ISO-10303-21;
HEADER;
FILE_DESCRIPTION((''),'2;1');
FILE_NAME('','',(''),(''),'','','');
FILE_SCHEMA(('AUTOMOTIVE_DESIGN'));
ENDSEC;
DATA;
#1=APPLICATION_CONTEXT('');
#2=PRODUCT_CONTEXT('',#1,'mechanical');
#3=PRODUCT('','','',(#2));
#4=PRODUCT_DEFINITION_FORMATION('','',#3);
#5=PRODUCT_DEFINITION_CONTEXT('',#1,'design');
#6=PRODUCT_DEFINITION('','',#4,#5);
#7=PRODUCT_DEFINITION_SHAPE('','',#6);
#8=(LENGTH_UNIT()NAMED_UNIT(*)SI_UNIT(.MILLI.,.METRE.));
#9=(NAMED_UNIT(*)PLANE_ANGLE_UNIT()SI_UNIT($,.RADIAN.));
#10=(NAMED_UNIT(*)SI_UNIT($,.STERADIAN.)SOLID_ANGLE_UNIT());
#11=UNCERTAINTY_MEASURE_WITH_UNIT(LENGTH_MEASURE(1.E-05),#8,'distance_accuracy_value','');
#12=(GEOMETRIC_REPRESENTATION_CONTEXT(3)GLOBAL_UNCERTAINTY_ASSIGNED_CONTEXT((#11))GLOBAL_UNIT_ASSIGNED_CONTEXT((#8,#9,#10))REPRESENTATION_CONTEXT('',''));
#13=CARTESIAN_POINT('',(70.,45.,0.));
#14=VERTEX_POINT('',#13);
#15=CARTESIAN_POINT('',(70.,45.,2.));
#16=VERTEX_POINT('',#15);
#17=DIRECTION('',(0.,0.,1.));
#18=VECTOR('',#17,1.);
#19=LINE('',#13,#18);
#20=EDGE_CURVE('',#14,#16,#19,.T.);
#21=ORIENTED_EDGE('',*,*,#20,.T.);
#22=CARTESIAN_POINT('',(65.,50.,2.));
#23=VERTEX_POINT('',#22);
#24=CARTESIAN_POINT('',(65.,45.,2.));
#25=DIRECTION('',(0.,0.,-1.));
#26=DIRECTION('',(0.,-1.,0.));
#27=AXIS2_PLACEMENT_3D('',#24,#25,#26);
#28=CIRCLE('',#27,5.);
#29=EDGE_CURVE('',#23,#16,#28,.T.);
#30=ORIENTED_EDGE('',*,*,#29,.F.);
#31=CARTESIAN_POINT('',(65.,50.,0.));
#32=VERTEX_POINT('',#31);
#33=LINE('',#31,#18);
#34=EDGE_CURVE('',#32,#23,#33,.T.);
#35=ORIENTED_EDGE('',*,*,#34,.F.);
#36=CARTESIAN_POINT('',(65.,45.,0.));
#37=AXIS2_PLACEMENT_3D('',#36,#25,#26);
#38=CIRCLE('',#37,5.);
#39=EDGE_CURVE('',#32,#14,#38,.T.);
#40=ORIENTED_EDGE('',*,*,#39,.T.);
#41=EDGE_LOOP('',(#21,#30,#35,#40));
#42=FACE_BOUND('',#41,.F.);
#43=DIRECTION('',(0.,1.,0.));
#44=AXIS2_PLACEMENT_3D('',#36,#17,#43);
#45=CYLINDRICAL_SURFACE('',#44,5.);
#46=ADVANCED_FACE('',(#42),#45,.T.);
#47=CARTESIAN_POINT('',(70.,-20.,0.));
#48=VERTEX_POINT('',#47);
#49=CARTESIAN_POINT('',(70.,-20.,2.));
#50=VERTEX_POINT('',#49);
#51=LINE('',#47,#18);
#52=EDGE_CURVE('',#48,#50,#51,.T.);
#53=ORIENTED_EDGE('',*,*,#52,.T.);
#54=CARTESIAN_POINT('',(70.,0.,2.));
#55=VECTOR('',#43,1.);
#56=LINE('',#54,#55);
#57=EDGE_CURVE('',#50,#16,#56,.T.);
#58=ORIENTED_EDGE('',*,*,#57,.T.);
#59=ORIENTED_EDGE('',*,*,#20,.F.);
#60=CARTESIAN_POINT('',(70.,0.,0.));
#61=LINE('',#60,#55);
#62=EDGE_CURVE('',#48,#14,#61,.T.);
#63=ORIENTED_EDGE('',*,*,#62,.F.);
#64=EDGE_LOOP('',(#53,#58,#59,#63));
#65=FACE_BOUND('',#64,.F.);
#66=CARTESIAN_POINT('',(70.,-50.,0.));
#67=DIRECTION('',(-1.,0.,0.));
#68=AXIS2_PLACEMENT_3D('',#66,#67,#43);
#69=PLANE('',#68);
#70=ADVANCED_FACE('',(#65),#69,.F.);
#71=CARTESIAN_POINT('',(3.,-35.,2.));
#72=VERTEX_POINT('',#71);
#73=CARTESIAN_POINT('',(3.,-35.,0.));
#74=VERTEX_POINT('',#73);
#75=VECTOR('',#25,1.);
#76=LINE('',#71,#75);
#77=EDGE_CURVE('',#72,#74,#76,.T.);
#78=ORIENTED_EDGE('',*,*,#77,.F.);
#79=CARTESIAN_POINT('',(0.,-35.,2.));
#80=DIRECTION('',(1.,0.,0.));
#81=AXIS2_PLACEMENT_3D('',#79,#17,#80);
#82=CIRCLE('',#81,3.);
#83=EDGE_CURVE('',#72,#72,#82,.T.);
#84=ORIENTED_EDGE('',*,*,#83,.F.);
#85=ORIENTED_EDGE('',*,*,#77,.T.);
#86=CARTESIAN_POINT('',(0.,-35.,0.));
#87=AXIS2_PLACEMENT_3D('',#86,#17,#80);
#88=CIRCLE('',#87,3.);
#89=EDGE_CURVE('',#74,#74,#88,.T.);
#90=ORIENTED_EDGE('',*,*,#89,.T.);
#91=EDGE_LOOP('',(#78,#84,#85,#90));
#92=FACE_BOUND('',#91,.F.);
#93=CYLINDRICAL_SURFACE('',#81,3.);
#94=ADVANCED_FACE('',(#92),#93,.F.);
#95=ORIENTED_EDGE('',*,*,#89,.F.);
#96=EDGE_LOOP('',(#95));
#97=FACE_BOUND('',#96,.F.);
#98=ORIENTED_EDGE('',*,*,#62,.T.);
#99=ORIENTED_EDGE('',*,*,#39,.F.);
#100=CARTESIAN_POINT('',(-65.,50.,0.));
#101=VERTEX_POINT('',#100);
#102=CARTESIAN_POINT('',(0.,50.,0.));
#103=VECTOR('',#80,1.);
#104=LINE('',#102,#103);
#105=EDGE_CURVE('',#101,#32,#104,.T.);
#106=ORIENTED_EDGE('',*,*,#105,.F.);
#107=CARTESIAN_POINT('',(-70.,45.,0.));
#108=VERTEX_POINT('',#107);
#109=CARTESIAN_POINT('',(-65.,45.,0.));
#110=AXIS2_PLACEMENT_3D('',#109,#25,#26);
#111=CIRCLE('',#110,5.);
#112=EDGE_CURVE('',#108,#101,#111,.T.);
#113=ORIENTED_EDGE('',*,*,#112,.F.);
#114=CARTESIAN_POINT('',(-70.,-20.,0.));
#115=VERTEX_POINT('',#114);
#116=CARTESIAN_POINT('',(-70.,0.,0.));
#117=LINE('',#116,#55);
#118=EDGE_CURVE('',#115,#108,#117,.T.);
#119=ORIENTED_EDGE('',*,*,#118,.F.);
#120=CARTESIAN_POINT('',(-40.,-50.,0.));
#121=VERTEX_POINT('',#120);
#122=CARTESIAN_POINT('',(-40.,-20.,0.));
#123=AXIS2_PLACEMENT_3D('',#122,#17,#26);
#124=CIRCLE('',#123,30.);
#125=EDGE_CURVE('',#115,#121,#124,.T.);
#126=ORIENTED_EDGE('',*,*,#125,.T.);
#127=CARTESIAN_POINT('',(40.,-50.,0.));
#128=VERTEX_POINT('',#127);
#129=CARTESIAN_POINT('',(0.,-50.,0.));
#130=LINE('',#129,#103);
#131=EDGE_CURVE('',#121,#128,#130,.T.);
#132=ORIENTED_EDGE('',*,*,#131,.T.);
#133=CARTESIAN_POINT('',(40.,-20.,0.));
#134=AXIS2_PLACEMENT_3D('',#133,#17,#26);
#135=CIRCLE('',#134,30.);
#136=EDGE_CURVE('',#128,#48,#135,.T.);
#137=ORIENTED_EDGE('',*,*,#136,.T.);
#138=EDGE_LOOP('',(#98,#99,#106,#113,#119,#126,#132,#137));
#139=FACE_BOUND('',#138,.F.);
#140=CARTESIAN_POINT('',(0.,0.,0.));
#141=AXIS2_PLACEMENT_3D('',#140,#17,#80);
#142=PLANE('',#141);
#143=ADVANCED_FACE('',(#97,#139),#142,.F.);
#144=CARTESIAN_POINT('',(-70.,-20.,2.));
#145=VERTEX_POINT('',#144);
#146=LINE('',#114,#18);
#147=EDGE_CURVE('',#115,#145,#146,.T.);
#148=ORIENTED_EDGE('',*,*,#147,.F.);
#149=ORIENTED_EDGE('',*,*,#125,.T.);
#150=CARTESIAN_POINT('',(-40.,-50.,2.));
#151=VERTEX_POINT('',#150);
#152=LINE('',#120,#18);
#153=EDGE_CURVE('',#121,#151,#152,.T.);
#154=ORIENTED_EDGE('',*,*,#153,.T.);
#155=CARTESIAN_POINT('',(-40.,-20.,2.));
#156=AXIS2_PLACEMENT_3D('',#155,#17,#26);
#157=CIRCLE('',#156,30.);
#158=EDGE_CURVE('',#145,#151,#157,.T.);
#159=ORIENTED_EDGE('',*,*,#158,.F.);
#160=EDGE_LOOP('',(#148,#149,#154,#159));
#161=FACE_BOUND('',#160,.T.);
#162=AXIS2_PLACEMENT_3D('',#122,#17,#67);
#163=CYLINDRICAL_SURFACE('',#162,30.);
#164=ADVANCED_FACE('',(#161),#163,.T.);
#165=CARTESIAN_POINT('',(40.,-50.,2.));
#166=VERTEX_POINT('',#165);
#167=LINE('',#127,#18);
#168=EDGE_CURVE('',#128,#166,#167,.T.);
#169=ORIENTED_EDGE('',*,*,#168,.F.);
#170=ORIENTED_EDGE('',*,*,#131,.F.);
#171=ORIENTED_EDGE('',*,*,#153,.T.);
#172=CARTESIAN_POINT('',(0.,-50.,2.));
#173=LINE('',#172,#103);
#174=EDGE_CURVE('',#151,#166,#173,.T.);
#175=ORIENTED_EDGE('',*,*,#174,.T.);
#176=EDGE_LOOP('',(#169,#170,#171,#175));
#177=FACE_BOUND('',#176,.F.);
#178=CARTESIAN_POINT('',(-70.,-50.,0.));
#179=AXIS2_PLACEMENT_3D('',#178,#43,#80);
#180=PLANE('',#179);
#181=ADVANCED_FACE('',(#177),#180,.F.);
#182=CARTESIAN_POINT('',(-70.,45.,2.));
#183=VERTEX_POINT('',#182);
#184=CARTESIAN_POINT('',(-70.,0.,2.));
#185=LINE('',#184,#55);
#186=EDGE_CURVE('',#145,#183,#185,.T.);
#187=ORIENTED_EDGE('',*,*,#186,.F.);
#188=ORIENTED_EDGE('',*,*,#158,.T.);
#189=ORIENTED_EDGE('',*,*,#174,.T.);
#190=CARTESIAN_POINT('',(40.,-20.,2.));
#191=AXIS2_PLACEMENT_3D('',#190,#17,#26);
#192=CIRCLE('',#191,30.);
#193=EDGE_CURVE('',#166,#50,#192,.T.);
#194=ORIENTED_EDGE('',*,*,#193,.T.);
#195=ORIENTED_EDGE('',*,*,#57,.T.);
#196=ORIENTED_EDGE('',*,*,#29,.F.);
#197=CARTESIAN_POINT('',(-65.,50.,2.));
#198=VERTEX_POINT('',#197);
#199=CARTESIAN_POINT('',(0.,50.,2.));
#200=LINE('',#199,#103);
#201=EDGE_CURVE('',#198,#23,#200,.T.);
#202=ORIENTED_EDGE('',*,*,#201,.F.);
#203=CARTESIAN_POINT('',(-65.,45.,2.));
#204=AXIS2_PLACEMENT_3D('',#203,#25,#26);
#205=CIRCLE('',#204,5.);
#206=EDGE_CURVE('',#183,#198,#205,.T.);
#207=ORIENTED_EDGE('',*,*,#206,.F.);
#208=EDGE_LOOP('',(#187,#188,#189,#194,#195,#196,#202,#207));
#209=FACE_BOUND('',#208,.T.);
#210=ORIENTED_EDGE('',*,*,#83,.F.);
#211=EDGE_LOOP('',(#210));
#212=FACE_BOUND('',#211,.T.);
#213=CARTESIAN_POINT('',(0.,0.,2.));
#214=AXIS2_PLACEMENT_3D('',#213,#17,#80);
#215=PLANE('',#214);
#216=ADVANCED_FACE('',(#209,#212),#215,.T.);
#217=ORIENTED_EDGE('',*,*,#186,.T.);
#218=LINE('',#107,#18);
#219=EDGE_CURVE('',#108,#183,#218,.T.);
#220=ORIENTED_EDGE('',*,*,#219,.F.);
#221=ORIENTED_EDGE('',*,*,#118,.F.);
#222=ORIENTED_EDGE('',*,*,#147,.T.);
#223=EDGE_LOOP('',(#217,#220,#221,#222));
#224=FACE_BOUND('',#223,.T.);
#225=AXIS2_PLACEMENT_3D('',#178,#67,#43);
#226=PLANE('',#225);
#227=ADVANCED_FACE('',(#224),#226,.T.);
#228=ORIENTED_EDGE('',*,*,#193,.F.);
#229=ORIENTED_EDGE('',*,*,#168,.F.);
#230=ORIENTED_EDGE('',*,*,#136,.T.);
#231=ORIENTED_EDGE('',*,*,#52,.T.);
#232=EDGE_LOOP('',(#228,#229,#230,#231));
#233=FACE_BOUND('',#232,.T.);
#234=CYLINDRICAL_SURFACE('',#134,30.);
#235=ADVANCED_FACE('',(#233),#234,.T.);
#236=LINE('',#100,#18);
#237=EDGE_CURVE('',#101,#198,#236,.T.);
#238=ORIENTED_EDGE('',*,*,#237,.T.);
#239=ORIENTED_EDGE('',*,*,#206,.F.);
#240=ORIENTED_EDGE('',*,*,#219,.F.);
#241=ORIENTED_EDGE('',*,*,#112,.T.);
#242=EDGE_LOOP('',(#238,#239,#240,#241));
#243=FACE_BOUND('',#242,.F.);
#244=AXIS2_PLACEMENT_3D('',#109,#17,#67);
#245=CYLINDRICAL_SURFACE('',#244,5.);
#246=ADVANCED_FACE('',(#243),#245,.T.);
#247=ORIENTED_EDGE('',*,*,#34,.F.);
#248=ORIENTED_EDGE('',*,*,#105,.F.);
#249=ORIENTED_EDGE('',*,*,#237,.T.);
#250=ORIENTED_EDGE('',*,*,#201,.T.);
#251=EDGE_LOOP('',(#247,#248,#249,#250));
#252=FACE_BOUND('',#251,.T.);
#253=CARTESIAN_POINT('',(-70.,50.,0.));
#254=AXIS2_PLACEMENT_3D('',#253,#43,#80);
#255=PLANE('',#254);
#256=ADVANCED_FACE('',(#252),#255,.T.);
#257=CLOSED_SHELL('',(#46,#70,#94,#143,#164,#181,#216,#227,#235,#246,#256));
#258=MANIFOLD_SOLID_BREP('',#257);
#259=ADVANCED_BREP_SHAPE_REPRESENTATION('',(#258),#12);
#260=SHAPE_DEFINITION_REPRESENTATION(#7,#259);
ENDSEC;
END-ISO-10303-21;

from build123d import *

# Parameters (mm, degrees)
F0_W     = 140
F0_H     = 100
F1_DEPTH = 2
F2_R     = 30
F3_R     = 3
F4_DEPTH = 25
F5_R     = 5


with BuildPart() as f1:
    # F0 (on Top) → F1 (new body)
    with BuildSketch(Plane.XY):
        Rectangle(F0_W, F0_H)
    extrude(amount=F1_DEPTH)

    # F2
    f2_edges = [f1.edges().sort_by_distance(p)[0] for p in [
        (-70, -50, 1),
        (70, -50, 1),
    ]]
    fillet(f2_edges, radius=F2_R)

    # F3 (on face) → F4 (cut)
    with BuildSketch(Plane.XY.offset(2)):
        with Locations((0, -35)):
            Circle(F3_R)
    extrude(amount=-F4_DEPTH, mode=Mode.SUBTRACT)

    # F5
    f5_edges = [f1.edges().sort_by_distance(p)[0] for p in [
        (70, 50, 1),
        (-70, 50, 1),
    ]]
    fillet(f5_edges, radius=F5_R)


solid = f1.part
